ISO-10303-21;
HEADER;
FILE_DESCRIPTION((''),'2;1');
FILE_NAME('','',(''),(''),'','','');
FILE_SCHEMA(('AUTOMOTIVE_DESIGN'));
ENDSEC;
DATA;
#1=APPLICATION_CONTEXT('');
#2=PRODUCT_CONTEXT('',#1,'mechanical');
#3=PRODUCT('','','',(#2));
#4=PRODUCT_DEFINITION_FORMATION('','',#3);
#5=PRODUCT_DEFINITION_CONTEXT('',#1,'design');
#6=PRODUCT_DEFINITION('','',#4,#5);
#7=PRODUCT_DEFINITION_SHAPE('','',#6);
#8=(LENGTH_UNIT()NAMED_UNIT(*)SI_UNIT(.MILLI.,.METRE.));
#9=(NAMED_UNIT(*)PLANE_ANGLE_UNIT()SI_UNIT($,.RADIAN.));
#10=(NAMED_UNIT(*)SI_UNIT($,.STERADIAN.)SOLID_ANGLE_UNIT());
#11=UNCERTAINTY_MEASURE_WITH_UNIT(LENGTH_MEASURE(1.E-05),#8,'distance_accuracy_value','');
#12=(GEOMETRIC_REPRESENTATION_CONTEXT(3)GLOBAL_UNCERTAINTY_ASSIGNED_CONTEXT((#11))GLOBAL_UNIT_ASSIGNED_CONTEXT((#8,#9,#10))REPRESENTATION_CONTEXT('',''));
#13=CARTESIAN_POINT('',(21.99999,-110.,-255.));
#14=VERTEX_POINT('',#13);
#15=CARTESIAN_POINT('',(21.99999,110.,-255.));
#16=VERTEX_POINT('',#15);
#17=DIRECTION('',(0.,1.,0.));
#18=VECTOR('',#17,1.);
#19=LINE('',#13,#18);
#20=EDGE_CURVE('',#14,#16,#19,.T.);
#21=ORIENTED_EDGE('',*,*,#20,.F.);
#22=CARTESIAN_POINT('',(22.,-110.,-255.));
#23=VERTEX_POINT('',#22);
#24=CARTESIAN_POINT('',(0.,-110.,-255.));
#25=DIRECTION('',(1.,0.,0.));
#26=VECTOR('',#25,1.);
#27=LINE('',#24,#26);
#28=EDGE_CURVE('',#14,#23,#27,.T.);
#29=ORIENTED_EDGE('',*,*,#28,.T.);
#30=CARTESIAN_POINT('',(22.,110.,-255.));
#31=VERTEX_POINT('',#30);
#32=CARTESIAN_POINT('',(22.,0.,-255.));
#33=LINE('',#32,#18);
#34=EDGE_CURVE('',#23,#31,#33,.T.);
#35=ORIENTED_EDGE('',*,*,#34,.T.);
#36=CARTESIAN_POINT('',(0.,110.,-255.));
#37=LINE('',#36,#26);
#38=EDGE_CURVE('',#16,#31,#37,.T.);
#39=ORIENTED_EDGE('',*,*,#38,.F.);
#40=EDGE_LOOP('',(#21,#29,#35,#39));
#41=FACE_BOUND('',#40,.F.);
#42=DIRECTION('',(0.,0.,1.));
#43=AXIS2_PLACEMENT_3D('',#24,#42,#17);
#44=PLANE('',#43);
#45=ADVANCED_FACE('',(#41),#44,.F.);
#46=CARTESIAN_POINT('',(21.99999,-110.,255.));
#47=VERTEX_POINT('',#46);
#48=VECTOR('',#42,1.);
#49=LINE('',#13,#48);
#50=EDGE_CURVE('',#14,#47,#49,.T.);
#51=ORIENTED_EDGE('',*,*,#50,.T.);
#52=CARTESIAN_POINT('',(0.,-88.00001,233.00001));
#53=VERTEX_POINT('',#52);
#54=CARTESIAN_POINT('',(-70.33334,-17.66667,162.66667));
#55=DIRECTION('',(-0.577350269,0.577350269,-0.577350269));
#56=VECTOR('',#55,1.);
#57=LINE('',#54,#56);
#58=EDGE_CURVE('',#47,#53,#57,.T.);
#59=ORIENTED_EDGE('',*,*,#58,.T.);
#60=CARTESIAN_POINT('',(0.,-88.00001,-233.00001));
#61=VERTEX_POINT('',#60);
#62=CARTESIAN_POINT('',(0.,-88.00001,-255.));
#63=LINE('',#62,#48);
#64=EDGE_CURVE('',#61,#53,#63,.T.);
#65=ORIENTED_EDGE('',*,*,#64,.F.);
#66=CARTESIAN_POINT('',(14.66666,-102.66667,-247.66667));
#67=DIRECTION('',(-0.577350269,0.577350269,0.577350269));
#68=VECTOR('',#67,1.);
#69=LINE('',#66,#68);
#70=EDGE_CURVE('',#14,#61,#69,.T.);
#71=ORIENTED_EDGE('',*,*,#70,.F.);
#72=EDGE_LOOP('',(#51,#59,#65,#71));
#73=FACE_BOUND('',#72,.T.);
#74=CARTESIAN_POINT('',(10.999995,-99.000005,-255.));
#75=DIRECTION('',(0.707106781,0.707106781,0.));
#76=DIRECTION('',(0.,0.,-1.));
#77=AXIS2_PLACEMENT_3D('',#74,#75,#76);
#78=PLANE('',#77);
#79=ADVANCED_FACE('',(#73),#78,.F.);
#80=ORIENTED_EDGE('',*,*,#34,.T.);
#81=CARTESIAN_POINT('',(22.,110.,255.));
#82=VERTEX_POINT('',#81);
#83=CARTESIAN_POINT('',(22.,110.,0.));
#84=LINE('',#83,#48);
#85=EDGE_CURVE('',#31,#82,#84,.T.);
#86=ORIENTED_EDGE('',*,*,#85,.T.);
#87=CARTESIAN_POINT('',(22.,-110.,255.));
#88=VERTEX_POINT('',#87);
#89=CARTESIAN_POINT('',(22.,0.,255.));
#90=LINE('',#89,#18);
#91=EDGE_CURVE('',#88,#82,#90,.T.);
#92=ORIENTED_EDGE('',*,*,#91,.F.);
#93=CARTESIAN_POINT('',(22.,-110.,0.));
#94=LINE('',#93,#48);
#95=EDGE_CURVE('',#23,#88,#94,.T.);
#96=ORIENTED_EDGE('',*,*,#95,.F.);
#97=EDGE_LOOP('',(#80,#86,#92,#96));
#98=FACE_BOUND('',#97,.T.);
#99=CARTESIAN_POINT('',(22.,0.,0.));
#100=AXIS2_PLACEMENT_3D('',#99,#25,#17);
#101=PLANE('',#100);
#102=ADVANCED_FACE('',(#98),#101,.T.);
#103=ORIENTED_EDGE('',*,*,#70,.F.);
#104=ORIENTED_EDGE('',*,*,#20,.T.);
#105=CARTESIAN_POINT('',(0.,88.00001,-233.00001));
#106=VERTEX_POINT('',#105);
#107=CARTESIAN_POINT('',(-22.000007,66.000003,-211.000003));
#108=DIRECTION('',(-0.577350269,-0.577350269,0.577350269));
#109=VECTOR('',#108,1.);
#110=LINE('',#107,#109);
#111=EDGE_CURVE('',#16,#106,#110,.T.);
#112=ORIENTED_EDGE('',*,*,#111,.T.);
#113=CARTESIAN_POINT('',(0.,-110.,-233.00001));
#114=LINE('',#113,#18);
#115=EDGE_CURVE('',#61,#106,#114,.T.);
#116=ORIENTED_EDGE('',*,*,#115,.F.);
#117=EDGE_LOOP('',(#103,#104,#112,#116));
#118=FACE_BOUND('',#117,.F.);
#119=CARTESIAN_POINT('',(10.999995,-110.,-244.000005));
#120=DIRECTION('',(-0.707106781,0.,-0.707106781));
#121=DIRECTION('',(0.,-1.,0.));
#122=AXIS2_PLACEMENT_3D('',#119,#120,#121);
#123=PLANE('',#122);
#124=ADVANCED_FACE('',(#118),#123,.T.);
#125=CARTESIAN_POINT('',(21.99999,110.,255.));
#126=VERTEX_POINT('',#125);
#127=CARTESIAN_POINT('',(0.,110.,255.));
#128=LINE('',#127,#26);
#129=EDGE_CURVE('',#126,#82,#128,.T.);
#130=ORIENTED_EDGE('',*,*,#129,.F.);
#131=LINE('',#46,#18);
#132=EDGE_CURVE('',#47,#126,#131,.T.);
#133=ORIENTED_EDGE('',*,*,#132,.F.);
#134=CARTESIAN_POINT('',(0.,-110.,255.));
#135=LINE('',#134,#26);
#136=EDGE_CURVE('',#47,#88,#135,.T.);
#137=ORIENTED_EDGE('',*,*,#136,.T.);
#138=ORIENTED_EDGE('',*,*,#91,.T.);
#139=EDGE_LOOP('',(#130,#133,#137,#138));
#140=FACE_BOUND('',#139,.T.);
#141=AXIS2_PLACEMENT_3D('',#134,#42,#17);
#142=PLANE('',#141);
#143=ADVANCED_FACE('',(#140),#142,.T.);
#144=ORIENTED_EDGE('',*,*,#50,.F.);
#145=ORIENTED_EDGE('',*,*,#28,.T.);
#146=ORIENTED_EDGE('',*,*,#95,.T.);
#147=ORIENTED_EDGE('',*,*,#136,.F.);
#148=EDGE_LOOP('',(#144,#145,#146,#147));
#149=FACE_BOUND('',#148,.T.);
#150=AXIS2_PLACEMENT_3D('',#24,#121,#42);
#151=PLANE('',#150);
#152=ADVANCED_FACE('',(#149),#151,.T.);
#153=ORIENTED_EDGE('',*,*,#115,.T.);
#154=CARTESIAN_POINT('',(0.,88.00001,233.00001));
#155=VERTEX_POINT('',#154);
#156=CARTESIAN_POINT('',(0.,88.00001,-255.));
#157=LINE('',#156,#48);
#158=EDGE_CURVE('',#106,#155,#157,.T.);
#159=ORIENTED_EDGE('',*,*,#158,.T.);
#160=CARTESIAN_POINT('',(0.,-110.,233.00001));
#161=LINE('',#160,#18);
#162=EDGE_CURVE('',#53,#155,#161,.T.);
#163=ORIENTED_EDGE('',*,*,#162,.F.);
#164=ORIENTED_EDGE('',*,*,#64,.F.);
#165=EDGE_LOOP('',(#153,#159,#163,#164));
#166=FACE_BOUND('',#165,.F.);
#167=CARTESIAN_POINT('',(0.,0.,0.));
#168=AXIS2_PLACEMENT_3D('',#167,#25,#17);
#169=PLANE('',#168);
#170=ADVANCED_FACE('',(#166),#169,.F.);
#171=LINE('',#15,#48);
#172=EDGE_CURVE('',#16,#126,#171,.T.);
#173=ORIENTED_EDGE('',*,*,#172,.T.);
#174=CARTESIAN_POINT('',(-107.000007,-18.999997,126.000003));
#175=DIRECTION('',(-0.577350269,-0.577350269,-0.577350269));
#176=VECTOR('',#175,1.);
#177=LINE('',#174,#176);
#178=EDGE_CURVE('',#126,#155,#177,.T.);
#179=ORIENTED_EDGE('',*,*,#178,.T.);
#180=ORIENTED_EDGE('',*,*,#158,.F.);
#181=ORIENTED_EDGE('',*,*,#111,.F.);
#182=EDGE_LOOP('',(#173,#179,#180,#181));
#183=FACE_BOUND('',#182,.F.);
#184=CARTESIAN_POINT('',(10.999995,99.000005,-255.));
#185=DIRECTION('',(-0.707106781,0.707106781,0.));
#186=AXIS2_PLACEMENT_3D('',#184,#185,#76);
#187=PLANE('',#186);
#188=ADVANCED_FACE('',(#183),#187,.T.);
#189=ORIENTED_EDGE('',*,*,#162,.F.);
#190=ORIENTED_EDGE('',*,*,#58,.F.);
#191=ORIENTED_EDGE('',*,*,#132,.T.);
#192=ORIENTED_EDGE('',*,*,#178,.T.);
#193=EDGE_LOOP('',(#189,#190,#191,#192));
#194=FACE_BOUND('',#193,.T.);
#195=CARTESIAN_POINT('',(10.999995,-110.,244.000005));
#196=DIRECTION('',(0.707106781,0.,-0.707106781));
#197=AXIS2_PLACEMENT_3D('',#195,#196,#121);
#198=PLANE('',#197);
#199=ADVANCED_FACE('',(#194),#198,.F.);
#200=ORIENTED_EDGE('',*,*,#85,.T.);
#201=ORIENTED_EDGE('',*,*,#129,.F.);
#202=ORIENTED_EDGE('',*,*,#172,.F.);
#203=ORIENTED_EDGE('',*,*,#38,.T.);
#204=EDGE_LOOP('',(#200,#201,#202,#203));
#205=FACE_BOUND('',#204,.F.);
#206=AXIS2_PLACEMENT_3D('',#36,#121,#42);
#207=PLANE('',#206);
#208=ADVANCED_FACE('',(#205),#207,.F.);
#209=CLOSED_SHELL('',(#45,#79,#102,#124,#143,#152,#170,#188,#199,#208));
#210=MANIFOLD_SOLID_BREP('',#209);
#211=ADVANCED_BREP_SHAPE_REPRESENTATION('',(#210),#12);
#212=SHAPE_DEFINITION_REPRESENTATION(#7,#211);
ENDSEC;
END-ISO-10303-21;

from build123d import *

# Parameters (mm, degrees)
F0_W     = 220
F0_H     = 510
F1_DEPTH = 22
F2_SIZE  = 21.99999


# Not quite as in the source:
# - a fillet or chamfer is up to 0.001 mm smaller than in the source, because OpenCascade refuses the exact size


with BuildPart() as f1:
    # F0 (on Right) → F1 (new body)
    with BuildSketch(Plane.YZ):
        Rectangle(F0_W, F0_H)
    extrude(amount=F1_DEPTH)

    # F2 (size 22 in the source; OpenCascade refuses exactly that, so slightly less here)
    f2_edges = [f1.edges().sort_by_distance(p)[0] for p in [
        (0, 0, 255),
        (0, 110, 0),
        (0, 0, -255),
        (0, -110, 0),
    ]]
    chamfer(f2_edges, length=F2_SIZE)


solid = f1.part
